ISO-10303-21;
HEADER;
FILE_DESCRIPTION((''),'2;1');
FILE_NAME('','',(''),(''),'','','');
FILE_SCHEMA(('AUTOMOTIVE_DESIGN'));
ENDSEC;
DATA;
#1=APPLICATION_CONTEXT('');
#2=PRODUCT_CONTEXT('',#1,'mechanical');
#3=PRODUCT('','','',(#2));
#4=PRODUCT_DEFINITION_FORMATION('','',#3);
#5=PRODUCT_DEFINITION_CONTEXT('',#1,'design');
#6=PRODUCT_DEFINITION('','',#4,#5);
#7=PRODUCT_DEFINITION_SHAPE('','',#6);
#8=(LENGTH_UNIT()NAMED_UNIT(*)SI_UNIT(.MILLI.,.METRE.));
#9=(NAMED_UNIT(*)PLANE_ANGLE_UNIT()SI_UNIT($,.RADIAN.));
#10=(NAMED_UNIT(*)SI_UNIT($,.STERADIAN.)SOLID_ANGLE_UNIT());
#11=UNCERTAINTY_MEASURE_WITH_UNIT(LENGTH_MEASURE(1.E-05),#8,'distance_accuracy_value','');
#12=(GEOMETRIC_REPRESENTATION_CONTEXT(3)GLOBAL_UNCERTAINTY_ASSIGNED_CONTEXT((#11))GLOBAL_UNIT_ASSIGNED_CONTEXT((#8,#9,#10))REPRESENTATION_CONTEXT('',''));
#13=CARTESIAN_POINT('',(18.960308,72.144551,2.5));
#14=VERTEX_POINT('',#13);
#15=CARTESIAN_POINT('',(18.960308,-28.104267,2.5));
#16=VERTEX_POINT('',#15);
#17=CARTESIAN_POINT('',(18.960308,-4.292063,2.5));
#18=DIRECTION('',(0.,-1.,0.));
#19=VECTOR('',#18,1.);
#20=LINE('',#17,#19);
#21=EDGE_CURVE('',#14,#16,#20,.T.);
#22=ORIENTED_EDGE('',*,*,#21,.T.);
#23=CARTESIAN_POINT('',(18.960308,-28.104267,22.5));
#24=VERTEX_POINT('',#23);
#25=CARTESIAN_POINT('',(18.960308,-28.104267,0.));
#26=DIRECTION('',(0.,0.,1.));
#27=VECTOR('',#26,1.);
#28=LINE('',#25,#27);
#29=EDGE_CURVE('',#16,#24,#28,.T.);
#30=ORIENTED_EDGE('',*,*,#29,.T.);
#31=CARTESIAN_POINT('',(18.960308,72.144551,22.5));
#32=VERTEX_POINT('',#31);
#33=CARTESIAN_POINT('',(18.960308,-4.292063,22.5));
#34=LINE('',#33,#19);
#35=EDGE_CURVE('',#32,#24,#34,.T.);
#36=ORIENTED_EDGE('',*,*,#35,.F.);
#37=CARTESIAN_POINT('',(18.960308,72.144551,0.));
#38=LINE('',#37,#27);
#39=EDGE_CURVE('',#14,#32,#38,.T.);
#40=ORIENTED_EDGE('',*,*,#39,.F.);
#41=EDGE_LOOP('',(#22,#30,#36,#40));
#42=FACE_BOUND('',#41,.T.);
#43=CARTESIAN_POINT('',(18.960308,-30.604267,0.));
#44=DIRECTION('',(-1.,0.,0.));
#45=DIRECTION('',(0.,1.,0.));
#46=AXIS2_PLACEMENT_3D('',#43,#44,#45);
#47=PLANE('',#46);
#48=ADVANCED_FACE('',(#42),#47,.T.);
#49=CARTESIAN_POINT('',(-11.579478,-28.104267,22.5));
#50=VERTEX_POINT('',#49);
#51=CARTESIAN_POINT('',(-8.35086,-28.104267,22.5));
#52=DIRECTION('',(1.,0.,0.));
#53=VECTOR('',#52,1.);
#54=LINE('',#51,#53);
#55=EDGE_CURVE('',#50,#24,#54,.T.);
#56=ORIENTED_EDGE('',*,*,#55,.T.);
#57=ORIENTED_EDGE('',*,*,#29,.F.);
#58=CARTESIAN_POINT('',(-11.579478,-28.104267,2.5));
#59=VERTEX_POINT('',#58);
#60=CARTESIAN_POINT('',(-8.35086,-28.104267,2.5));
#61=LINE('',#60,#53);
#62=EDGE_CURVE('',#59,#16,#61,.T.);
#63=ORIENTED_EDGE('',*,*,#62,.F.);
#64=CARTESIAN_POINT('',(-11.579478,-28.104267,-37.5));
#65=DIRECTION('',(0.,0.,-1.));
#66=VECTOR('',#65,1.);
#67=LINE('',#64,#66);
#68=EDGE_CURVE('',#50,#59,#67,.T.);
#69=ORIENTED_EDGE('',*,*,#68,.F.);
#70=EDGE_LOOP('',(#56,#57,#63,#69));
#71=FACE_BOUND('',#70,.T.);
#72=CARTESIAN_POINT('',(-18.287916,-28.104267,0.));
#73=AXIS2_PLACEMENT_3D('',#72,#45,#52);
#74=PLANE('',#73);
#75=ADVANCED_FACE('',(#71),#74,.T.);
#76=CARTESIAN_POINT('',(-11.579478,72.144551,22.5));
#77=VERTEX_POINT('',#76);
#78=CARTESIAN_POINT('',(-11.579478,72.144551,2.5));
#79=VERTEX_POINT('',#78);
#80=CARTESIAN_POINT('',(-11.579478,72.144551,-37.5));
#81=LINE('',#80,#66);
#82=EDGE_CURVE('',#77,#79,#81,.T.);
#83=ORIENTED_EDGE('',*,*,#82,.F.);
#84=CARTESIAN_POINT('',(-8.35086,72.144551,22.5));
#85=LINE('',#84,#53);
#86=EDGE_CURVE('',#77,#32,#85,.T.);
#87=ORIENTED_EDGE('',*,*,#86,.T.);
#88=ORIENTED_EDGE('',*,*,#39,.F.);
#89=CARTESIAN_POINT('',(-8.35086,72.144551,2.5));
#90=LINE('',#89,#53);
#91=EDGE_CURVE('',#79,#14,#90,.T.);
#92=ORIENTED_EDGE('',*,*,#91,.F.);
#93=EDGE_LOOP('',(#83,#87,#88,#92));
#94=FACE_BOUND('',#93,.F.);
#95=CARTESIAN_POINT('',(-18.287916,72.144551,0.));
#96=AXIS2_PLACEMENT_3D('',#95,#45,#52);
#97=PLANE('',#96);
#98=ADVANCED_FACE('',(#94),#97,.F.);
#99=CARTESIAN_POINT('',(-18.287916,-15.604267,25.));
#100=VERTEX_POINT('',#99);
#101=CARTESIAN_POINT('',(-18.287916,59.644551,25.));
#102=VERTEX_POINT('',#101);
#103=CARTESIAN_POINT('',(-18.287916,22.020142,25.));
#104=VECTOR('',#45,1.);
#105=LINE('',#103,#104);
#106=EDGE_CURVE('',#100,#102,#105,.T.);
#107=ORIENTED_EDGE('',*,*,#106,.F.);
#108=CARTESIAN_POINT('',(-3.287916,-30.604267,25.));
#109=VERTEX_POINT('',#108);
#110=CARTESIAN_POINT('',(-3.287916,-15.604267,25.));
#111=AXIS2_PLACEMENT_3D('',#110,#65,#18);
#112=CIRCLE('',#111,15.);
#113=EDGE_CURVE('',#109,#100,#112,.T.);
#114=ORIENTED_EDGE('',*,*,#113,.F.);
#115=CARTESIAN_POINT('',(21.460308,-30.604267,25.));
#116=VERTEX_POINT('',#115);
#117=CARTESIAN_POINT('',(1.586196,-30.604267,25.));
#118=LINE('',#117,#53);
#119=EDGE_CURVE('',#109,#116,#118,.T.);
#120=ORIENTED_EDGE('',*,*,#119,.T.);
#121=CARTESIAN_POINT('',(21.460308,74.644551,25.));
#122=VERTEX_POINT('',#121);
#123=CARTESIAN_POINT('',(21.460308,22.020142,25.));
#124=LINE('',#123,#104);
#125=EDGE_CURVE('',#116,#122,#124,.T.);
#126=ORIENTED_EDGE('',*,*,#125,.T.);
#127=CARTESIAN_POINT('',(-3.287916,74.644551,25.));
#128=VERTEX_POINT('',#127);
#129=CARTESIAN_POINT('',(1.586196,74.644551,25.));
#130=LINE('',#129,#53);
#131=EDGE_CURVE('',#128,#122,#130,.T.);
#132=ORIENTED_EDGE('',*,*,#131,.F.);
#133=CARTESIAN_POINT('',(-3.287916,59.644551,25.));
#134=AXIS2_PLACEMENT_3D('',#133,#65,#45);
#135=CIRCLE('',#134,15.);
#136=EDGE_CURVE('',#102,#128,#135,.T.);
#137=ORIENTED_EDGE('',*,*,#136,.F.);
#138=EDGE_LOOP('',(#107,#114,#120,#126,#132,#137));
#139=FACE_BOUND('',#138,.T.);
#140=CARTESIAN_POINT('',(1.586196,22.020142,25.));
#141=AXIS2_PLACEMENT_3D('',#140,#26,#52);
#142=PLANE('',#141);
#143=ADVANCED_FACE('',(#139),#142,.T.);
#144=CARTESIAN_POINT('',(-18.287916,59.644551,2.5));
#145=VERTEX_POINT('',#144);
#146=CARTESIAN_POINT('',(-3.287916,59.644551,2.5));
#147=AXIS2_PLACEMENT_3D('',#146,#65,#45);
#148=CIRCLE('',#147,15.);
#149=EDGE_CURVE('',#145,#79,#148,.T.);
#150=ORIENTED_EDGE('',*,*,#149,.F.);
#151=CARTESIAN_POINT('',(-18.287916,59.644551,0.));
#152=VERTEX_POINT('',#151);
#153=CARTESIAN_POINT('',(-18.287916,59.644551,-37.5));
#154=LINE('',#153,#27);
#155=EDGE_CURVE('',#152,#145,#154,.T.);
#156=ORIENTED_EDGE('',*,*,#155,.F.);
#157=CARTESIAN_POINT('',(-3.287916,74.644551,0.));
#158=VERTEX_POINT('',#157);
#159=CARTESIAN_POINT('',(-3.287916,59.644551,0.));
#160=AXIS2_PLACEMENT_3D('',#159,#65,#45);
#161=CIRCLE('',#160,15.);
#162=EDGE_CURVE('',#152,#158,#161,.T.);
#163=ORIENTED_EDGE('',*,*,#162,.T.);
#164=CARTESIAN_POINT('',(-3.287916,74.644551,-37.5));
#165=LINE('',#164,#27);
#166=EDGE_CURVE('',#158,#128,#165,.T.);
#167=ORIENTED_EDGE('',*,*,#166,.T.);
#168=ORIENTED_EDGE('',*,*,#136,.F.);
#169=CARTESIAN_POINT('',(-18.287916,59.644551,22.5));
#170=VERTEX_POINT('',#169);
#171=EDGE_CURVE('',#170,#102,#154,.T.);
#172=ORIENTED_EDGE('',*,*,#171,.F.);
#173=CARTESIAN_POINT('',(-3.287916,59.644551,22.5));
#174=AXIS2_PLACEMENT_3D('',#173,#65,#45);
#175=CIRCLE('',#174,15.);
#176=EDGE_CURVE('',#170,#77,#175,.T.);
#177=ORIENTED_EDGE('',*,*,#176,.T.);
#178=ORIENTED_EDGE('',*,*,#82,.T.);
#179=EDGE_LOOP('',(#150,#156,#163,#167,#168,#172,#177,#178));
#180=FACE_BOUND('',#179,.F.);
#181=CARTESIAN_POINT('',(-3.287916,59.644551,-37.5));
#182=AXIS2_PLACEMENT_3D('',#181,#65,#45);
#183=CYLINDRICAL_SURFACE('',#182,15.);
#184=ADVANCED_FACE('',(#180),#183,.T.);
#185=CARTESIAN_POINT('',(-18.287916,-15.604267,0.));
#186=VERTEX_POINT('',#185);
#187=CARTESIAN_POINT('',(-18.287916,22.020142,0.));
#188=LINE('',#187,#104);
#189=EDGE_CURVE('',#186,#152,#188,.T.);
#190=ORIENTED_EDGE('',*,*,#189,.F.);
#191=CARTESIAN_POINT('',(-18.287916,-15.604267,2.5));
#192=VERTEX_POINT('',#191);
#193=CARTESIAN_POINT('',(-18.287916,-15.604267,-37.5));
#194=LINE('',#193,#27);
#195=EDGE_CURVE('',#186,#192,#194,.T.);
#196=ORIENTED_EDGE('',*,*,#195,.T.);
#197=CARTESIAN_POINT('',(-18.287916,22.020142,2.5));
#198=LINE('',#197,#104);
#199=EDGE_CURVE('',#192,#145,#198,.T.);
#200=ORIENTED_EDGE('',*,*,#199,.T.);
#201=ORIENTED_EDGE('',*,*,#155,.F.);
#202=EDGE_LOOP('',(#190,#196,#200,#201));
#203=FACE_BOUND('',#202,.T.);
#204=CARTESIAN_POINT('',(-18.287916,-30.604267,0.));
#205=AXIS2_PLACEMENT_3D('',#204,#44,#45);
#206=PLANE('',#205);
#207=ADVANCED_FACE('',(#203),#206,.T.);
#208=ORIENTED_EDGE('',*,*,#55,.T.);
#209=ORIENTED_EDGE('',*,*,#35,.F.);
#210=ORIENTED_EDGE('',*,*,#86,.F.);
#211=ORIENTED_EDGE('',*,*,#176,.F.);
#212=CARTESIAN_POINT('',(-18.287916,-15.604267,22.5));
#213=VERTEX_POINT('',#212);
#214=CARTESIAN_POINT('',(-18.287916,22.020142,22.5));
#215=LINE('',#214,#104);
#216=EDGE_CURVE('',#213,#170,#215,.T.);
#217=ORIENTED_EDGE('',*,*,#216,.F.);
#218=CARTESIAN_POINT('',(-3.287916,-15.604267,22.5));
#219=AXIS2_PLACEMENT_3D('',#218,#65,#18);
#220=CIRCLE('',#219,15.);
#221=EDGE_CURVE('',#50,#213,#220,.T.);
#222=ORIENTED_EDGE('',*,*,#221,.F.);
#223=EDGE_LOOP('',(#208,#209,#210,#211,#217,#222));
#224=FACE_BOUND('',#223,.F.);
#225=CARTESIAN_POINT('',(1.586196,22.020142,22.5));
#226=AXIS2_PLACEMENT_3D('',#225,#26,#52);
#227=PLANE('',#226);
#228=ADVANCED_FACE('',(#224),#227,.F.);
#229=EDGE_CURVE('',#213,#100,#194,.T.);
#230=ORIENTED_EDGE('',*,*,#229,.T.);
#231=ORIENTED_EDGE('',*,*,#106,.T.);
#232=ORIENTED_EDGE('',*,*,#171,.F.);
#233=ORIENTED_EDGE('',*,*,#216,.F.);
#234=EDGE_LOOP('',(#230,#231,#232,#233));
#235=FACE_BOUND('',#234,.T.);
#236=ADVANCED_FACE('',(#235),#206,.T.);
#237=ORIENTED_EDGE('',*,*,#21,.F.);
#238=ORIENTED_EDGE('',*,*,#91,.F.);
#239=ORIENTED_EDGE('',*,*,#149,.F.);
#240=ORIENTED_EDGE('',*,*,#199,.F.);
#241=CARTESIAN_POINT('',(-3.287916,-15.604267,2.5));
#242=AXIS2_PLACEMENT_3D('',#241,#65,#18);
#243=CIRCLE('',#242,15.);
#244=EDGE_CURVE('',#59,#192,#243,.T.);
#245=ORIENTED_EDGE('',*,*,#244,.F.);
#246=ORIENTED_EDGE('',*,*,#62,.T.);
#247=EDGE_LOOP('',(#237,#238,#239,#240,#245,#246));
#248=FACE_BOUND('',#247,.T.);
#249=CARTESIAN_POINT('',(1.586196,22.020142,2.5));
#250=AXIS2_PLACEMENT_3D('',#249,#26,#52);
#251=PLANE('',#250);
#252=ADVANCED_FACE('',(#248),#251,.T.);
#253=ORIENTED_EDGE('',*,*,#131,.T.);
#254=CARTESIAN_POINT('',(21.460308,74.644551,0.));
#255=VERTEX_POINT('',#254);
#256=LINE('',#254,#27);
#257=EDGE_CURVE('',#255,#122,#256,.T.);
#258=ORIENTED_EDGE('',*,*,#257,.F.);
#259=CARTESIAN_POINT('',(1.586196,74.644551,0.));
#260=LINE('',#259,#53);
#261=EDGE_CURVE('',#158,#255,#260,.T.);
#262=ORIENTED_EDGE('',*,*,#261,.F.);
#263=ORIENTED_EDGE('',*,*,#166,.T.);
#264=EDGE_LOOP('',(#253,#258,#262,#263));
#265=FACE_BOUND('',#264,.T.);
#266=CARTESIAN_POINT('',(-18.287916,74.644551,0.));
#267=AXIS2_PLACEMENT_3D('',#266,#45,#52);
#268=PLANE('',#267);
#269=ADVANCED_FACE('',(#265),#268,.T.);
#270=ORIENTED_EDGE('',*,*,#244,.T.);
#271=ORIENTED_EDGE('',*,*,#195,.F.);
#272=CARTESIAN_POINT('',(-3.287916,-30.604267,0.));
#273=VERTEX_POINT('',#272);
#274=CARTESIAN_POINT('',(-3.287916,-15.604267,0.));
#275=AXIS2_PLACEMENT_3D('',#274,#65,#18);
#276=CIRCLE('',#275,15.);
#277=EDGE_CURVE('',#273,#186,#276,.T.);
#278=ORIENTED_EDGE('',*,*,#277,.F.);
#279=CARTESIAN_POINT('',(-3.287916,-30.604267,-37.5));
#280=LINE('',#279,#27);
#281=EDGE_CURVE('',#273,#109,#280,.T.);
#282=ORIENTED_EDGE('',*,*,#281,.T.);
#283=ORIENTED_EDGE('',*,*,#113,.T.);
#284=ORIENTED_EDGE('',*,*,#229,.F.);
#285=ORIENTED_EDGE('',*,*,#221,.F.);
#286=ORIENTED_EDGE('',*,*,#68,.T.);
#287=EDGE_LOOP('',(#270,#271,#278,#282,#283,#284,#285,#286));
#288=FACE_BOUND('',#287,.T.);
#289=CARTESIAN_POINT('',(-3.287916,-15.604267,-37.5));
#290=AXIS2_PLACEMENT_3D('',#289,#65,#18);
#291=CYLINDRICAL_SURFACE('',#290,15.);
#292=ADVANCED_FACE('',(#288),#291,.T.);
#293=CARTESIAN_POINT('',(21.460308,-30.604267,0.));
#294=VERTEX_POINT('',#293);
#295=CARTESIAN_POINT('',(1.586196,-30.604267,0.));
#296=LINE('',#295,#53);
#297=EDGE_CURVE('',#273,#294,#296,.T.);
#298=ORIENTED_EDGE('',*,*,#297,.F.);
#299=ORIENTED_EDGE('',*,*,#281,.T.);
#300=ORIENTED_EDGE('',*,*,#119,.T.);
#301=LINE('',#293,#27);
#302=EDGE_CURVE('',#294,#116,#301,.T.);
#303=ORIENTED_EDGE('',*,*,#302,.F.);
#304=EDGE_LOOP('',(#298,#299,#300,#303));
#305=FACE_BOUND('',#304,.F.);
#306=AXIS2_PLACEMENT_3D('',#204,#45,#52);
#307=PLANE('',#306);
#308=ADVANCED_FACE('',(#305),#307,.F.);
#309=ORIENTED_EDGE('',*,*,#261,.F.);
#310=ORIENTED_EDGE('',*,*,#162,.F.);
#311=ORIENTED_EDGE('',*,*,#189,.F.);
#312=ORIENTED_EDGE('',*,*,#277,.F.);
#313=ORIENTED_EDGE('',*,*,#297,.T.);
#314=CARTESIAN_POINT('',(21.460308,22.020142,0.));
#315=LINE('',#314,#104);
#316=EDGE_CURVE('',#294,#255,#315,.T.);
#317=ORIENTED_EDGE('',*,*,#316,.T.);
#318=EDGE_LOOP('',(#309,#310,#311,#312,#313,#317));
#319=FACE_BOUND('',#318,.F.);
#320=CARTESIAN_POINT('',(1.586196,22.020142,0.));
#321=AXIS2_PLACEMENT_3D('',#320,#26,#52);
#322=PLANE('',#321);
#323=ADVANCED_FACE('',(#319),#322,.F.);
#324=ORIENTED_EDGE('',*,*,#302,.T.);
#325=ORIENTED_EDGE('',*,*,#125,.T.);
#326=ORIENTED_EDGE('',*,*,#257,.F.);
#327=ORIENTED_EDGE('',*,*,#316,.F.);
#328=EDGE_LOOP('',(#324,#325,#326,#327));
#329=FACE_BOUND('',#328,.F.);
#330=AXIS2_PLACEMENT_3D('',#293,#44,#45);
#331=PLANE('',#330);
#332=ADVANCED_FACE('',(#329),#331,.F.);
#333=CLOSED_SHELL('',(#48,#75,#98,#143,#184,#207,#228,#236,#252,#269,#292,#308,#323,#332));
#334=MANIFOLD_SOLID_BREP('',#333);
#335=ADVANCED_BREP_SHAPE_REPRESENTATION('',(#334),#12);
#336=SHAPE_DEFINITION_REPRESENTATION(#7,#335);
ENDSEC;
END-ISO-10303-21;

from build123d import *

# Parameters (mm, degrees)
F0_W        = 39.7482234985
F0_H        = 105.248818174
F1_DEPTH    = 25
F2_T        = -2.5
F3_T1_DEPTH = 100


# Not quite as in the source:
# - a fillet or chamfer that OpenCascade refuses, or shapes differently, is made with other operations: its cross-section is extruded or revolved along the edge and cut away or added


with BuildPart() as f1:
    # F0 (on Top) → F1 (new body)
    with BuildSketch(Plane.XY):
        with Locations((1.5861960128, 22.0201415941)):
            Rectangle(F0_W, F0_H)
    extrude(amount=F1_DEPTH)

    # F2
    f2_openings = [f1.faces().sort_by_distance(p)[0] for p in [
        (-18.287916, 22.020142, 12.5),
    ]]
    offset(amount=F2_T, openings=f2_openings)

    # F3: fillet of radius 15 on 2 edges, made by hand

    # F3_s2 → F3_t1 (cut)
    with BuildSketch(Plane.XY.offset(-37.5)):
        with BuildLine():
            ThreePointArc((-3.2879157364, 74.6445506811), (-13.8945174542, 70.2511523989), (-18.2879157364, 59.6445506811))
            Line((-18.2879157364, 59.6445506811), (-18.2879157364, 74.6445506811))
            Line((-18.2879157364, 74.6445506811), (-3.2879157364, 74.6445506811))
        make_face()
        with BuildLine():
            ThreePointArc((-3.2879157364, -30.6042674929), (-13.8945174542, -26.2108692107), (-18.2879157364, -15.6042674929))
            Line((-18.2879157364, -15.6042674929), (-18.2879157364, -30.6042674929))
            Line((-18.2879157364, -30.6042674929), (-3.2879157364, -30.6042674929))
        make_face()
    extrude(amount=F3_T1_DEPTH, mode=Mode.SUBTRACT)


solid = f1.part
